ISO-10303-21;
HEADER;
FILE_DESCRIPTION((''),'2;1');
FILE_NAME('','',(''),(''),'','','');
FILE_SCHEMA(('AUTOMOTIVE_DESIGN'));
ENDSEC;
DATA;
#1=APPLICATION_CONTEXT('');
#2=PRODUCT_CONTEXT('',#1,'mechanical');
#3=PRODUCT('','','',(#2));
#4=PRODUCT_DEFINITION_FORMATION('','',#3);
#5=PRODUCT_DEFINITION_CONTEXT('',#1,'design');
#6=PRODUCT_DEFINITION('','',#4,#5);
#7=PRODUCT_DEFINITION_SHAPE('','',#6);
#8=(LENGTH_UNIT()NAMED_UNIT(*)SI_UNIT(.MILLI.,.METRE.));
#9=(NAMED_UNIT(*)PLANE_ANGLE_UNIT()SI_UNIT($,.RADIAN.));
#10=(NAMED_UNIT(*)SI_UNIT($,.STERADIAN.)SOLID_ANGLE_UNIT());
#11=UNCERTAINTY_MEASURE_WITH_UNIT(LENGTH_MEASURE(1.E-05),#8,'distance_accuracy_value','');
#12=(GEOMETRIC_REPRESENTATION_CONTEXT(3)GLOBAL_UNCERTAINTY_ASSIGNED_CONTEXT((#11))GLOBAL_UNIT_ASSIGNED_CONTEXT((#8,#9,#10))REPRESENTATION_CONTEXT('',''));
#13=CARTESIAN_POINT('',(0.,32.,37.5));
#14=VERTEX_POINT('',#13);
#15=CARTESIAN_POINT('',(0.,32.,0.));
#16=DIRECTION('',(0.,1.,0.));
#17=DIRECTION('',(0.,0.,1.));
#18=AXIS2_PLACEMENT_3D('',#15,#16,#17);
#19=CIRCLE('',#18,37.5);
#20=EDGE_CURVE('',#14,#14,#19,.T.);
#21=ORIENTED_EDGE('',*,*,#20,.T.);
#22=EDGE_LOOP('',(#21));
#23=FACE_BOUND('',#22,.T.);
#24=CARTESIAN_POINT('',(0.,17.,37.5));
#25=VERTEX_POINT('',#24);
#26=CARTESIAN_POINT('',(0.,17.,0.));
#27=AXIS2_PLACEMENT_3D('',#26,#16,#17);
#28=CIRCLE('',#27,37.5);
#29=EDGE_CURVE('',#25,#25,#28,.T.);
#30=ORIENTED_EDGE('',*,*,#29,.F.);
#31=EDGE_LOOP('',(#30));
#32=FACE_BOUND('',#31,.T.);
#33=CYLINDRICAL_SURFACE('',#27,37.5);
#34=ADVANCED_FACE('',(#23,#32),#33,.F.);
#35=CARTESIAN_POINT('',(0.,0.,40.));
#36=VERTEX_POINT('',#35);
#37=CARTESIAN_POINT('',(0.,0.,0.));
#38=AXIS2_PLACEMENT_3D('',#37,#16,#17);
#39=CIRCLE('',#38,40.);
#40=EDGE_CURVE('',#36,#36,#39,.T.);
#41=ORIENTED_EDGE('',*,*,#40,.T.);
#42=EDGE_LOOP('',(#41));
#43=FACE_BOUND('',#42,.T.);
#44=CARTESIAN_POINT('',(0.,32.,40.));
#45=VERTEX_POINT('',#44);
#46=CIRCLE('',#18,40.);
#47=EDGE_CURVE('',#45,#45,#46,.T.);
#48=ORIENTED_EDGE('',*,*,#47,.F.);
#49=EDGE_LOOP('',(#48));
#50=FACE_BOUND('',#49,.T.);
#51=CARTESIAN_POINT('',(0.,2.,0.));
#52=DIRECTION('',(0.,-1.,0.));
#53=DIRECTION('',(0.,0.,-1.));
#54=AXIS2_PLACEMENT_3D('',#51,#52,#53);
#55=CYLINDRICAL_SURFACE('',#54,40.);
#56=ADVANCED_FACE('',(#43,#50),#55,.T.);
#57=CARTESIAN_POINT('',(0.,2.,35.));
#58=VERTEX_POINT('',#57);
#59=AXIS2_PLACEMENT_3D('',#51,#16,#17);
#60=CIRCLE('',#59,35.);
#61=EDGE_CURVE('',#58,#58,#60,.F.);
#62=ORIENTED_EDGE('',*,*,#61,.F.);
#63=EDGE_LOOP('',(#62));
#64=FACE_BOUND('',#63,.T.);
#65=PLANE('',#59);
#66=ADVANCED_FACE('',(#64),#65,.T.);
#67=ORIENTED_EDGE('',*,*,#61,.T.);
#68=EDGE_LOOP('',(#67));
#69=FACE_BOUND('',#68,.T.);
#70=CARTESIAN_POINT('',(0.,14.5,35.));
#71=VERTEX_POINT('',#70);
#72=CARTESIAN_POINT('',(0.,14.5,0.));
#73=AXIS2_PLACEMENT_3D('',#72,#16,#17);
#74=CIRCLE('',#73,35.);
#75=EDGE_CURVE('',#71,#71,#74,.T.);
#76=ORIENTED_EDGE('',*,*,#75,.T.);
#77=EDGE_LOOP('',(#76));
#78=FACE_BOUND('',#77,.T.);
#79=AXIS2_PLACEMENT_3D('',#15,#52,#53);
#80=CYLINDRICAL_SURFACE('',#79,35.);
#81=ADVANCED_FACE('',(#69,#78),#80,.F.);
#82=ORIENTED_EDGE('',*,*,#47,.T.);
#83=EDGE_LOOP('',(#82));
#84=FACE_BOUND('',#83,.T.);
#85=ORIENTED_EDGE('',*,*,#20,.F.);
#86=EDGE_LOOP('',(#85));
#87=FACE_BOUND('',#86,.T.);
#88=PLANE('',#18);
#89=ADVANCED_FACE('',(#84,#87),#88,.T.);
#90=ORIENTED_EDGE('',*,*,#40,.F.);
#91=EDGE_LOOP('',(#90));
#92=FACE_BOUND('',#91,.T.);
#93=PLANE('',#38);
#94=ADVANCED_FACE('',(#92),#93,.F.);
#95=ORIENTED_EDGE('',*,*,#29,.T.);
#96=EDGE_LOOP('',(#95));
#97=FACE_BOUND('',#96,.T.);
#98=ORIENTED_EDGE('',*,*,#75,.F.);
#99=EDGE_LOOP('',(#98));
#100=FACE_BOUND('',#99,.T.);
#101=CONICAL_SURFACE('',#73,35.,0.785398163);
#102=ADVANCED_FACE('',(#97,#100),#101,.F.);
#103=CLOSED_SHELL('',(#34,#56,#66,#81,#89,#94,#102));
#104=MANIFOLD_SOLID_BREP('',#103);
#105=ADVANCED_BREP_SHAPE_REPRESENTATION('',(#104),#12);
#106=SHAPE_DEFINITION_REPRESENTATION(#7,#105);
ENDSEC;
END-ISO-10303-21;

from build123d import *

# Parameters (mm, degrees)
CROQUIS1_R              = 40
SALIENTE_EXTRUIR1_DEPTH = 2
CROQUIS2_R              = 40
CROQUIS2_R_2            = 35
SALIENTE_EXTRUIR2_DEPTH = 30
CORTAR_EXTRUIR1_START   = -15
CROQUIS3_R              = 37.5
CROQUIS3_R_2            = 35
CORTAR_EXTRUIR1_DEPTH   = 15
CHAFL_N1_SIZE           = 2.5


with BuildPart() as part:
    # Croquis1 → Saliente-Extruir1 (new body)
    with BuildSketch(Plane(origin=(0, 0, 0), x_dir=(1, 0, 0), z_dir=(0, 1, 0))):
        with Locations(Location((0, 0, 0), (0, 0, 270))):
            Circle(CROQUIS1_R)
    extrude(amount=SALIENTE_EXTRUIR1_DEPTH)

    # Croquis2 → Saliente-Extruir2 (add)
    with BuildSketch(Plane(origin=(0, 2, 0), x_dir=(1, 0, 0), z_dir=(0, 1, 0))):
        with Locations(Location((0, 0, 0), (0, 0, 270))):
            Circle(CROQUIS2_R)
        with Locations(Location((0, 0, 0), (0, 0, 270))):
            Circle(CROQUIS2_R_2, mode=Mode.SUBTRACT)
    extrude(amount=SALIENTE_EXTRUIR2_DEPTH)

    # Croquis3 → Cortar-Extruir1 (cut)
    with BuildSketch(Plane(origin=(0, 32, 0), x_dir=(1, 0, 0), z_dir=(0, 1, 0)).offset(CORTAR_EXTRUIR1_START)):
        with Locations(Location((0, 0, 0), (0, 0, 270))):
            Circle(CROQUIS3_R)
        with Locations(Location((0, 0, 0), (0, 0, 270))):
            Circle(CROQUIS3_R_2, mode=Mode.SUBTRACT)
    extrude(amount=CORTAR_EXTRUIR1_DEPTH, mode=Mode.SUBTRACT)

    # Chaflán1
    chafl_n1_edges = [part.edges().sort_by_distance(p)[0] for p in [
        (0, 17, -35),
    ]]
    chamfer(chafl_n1_edges, length=CHAFL_N1_SIZE - 0.0001)  # a hair under: the kernel refuses the full size


solid = part.part
